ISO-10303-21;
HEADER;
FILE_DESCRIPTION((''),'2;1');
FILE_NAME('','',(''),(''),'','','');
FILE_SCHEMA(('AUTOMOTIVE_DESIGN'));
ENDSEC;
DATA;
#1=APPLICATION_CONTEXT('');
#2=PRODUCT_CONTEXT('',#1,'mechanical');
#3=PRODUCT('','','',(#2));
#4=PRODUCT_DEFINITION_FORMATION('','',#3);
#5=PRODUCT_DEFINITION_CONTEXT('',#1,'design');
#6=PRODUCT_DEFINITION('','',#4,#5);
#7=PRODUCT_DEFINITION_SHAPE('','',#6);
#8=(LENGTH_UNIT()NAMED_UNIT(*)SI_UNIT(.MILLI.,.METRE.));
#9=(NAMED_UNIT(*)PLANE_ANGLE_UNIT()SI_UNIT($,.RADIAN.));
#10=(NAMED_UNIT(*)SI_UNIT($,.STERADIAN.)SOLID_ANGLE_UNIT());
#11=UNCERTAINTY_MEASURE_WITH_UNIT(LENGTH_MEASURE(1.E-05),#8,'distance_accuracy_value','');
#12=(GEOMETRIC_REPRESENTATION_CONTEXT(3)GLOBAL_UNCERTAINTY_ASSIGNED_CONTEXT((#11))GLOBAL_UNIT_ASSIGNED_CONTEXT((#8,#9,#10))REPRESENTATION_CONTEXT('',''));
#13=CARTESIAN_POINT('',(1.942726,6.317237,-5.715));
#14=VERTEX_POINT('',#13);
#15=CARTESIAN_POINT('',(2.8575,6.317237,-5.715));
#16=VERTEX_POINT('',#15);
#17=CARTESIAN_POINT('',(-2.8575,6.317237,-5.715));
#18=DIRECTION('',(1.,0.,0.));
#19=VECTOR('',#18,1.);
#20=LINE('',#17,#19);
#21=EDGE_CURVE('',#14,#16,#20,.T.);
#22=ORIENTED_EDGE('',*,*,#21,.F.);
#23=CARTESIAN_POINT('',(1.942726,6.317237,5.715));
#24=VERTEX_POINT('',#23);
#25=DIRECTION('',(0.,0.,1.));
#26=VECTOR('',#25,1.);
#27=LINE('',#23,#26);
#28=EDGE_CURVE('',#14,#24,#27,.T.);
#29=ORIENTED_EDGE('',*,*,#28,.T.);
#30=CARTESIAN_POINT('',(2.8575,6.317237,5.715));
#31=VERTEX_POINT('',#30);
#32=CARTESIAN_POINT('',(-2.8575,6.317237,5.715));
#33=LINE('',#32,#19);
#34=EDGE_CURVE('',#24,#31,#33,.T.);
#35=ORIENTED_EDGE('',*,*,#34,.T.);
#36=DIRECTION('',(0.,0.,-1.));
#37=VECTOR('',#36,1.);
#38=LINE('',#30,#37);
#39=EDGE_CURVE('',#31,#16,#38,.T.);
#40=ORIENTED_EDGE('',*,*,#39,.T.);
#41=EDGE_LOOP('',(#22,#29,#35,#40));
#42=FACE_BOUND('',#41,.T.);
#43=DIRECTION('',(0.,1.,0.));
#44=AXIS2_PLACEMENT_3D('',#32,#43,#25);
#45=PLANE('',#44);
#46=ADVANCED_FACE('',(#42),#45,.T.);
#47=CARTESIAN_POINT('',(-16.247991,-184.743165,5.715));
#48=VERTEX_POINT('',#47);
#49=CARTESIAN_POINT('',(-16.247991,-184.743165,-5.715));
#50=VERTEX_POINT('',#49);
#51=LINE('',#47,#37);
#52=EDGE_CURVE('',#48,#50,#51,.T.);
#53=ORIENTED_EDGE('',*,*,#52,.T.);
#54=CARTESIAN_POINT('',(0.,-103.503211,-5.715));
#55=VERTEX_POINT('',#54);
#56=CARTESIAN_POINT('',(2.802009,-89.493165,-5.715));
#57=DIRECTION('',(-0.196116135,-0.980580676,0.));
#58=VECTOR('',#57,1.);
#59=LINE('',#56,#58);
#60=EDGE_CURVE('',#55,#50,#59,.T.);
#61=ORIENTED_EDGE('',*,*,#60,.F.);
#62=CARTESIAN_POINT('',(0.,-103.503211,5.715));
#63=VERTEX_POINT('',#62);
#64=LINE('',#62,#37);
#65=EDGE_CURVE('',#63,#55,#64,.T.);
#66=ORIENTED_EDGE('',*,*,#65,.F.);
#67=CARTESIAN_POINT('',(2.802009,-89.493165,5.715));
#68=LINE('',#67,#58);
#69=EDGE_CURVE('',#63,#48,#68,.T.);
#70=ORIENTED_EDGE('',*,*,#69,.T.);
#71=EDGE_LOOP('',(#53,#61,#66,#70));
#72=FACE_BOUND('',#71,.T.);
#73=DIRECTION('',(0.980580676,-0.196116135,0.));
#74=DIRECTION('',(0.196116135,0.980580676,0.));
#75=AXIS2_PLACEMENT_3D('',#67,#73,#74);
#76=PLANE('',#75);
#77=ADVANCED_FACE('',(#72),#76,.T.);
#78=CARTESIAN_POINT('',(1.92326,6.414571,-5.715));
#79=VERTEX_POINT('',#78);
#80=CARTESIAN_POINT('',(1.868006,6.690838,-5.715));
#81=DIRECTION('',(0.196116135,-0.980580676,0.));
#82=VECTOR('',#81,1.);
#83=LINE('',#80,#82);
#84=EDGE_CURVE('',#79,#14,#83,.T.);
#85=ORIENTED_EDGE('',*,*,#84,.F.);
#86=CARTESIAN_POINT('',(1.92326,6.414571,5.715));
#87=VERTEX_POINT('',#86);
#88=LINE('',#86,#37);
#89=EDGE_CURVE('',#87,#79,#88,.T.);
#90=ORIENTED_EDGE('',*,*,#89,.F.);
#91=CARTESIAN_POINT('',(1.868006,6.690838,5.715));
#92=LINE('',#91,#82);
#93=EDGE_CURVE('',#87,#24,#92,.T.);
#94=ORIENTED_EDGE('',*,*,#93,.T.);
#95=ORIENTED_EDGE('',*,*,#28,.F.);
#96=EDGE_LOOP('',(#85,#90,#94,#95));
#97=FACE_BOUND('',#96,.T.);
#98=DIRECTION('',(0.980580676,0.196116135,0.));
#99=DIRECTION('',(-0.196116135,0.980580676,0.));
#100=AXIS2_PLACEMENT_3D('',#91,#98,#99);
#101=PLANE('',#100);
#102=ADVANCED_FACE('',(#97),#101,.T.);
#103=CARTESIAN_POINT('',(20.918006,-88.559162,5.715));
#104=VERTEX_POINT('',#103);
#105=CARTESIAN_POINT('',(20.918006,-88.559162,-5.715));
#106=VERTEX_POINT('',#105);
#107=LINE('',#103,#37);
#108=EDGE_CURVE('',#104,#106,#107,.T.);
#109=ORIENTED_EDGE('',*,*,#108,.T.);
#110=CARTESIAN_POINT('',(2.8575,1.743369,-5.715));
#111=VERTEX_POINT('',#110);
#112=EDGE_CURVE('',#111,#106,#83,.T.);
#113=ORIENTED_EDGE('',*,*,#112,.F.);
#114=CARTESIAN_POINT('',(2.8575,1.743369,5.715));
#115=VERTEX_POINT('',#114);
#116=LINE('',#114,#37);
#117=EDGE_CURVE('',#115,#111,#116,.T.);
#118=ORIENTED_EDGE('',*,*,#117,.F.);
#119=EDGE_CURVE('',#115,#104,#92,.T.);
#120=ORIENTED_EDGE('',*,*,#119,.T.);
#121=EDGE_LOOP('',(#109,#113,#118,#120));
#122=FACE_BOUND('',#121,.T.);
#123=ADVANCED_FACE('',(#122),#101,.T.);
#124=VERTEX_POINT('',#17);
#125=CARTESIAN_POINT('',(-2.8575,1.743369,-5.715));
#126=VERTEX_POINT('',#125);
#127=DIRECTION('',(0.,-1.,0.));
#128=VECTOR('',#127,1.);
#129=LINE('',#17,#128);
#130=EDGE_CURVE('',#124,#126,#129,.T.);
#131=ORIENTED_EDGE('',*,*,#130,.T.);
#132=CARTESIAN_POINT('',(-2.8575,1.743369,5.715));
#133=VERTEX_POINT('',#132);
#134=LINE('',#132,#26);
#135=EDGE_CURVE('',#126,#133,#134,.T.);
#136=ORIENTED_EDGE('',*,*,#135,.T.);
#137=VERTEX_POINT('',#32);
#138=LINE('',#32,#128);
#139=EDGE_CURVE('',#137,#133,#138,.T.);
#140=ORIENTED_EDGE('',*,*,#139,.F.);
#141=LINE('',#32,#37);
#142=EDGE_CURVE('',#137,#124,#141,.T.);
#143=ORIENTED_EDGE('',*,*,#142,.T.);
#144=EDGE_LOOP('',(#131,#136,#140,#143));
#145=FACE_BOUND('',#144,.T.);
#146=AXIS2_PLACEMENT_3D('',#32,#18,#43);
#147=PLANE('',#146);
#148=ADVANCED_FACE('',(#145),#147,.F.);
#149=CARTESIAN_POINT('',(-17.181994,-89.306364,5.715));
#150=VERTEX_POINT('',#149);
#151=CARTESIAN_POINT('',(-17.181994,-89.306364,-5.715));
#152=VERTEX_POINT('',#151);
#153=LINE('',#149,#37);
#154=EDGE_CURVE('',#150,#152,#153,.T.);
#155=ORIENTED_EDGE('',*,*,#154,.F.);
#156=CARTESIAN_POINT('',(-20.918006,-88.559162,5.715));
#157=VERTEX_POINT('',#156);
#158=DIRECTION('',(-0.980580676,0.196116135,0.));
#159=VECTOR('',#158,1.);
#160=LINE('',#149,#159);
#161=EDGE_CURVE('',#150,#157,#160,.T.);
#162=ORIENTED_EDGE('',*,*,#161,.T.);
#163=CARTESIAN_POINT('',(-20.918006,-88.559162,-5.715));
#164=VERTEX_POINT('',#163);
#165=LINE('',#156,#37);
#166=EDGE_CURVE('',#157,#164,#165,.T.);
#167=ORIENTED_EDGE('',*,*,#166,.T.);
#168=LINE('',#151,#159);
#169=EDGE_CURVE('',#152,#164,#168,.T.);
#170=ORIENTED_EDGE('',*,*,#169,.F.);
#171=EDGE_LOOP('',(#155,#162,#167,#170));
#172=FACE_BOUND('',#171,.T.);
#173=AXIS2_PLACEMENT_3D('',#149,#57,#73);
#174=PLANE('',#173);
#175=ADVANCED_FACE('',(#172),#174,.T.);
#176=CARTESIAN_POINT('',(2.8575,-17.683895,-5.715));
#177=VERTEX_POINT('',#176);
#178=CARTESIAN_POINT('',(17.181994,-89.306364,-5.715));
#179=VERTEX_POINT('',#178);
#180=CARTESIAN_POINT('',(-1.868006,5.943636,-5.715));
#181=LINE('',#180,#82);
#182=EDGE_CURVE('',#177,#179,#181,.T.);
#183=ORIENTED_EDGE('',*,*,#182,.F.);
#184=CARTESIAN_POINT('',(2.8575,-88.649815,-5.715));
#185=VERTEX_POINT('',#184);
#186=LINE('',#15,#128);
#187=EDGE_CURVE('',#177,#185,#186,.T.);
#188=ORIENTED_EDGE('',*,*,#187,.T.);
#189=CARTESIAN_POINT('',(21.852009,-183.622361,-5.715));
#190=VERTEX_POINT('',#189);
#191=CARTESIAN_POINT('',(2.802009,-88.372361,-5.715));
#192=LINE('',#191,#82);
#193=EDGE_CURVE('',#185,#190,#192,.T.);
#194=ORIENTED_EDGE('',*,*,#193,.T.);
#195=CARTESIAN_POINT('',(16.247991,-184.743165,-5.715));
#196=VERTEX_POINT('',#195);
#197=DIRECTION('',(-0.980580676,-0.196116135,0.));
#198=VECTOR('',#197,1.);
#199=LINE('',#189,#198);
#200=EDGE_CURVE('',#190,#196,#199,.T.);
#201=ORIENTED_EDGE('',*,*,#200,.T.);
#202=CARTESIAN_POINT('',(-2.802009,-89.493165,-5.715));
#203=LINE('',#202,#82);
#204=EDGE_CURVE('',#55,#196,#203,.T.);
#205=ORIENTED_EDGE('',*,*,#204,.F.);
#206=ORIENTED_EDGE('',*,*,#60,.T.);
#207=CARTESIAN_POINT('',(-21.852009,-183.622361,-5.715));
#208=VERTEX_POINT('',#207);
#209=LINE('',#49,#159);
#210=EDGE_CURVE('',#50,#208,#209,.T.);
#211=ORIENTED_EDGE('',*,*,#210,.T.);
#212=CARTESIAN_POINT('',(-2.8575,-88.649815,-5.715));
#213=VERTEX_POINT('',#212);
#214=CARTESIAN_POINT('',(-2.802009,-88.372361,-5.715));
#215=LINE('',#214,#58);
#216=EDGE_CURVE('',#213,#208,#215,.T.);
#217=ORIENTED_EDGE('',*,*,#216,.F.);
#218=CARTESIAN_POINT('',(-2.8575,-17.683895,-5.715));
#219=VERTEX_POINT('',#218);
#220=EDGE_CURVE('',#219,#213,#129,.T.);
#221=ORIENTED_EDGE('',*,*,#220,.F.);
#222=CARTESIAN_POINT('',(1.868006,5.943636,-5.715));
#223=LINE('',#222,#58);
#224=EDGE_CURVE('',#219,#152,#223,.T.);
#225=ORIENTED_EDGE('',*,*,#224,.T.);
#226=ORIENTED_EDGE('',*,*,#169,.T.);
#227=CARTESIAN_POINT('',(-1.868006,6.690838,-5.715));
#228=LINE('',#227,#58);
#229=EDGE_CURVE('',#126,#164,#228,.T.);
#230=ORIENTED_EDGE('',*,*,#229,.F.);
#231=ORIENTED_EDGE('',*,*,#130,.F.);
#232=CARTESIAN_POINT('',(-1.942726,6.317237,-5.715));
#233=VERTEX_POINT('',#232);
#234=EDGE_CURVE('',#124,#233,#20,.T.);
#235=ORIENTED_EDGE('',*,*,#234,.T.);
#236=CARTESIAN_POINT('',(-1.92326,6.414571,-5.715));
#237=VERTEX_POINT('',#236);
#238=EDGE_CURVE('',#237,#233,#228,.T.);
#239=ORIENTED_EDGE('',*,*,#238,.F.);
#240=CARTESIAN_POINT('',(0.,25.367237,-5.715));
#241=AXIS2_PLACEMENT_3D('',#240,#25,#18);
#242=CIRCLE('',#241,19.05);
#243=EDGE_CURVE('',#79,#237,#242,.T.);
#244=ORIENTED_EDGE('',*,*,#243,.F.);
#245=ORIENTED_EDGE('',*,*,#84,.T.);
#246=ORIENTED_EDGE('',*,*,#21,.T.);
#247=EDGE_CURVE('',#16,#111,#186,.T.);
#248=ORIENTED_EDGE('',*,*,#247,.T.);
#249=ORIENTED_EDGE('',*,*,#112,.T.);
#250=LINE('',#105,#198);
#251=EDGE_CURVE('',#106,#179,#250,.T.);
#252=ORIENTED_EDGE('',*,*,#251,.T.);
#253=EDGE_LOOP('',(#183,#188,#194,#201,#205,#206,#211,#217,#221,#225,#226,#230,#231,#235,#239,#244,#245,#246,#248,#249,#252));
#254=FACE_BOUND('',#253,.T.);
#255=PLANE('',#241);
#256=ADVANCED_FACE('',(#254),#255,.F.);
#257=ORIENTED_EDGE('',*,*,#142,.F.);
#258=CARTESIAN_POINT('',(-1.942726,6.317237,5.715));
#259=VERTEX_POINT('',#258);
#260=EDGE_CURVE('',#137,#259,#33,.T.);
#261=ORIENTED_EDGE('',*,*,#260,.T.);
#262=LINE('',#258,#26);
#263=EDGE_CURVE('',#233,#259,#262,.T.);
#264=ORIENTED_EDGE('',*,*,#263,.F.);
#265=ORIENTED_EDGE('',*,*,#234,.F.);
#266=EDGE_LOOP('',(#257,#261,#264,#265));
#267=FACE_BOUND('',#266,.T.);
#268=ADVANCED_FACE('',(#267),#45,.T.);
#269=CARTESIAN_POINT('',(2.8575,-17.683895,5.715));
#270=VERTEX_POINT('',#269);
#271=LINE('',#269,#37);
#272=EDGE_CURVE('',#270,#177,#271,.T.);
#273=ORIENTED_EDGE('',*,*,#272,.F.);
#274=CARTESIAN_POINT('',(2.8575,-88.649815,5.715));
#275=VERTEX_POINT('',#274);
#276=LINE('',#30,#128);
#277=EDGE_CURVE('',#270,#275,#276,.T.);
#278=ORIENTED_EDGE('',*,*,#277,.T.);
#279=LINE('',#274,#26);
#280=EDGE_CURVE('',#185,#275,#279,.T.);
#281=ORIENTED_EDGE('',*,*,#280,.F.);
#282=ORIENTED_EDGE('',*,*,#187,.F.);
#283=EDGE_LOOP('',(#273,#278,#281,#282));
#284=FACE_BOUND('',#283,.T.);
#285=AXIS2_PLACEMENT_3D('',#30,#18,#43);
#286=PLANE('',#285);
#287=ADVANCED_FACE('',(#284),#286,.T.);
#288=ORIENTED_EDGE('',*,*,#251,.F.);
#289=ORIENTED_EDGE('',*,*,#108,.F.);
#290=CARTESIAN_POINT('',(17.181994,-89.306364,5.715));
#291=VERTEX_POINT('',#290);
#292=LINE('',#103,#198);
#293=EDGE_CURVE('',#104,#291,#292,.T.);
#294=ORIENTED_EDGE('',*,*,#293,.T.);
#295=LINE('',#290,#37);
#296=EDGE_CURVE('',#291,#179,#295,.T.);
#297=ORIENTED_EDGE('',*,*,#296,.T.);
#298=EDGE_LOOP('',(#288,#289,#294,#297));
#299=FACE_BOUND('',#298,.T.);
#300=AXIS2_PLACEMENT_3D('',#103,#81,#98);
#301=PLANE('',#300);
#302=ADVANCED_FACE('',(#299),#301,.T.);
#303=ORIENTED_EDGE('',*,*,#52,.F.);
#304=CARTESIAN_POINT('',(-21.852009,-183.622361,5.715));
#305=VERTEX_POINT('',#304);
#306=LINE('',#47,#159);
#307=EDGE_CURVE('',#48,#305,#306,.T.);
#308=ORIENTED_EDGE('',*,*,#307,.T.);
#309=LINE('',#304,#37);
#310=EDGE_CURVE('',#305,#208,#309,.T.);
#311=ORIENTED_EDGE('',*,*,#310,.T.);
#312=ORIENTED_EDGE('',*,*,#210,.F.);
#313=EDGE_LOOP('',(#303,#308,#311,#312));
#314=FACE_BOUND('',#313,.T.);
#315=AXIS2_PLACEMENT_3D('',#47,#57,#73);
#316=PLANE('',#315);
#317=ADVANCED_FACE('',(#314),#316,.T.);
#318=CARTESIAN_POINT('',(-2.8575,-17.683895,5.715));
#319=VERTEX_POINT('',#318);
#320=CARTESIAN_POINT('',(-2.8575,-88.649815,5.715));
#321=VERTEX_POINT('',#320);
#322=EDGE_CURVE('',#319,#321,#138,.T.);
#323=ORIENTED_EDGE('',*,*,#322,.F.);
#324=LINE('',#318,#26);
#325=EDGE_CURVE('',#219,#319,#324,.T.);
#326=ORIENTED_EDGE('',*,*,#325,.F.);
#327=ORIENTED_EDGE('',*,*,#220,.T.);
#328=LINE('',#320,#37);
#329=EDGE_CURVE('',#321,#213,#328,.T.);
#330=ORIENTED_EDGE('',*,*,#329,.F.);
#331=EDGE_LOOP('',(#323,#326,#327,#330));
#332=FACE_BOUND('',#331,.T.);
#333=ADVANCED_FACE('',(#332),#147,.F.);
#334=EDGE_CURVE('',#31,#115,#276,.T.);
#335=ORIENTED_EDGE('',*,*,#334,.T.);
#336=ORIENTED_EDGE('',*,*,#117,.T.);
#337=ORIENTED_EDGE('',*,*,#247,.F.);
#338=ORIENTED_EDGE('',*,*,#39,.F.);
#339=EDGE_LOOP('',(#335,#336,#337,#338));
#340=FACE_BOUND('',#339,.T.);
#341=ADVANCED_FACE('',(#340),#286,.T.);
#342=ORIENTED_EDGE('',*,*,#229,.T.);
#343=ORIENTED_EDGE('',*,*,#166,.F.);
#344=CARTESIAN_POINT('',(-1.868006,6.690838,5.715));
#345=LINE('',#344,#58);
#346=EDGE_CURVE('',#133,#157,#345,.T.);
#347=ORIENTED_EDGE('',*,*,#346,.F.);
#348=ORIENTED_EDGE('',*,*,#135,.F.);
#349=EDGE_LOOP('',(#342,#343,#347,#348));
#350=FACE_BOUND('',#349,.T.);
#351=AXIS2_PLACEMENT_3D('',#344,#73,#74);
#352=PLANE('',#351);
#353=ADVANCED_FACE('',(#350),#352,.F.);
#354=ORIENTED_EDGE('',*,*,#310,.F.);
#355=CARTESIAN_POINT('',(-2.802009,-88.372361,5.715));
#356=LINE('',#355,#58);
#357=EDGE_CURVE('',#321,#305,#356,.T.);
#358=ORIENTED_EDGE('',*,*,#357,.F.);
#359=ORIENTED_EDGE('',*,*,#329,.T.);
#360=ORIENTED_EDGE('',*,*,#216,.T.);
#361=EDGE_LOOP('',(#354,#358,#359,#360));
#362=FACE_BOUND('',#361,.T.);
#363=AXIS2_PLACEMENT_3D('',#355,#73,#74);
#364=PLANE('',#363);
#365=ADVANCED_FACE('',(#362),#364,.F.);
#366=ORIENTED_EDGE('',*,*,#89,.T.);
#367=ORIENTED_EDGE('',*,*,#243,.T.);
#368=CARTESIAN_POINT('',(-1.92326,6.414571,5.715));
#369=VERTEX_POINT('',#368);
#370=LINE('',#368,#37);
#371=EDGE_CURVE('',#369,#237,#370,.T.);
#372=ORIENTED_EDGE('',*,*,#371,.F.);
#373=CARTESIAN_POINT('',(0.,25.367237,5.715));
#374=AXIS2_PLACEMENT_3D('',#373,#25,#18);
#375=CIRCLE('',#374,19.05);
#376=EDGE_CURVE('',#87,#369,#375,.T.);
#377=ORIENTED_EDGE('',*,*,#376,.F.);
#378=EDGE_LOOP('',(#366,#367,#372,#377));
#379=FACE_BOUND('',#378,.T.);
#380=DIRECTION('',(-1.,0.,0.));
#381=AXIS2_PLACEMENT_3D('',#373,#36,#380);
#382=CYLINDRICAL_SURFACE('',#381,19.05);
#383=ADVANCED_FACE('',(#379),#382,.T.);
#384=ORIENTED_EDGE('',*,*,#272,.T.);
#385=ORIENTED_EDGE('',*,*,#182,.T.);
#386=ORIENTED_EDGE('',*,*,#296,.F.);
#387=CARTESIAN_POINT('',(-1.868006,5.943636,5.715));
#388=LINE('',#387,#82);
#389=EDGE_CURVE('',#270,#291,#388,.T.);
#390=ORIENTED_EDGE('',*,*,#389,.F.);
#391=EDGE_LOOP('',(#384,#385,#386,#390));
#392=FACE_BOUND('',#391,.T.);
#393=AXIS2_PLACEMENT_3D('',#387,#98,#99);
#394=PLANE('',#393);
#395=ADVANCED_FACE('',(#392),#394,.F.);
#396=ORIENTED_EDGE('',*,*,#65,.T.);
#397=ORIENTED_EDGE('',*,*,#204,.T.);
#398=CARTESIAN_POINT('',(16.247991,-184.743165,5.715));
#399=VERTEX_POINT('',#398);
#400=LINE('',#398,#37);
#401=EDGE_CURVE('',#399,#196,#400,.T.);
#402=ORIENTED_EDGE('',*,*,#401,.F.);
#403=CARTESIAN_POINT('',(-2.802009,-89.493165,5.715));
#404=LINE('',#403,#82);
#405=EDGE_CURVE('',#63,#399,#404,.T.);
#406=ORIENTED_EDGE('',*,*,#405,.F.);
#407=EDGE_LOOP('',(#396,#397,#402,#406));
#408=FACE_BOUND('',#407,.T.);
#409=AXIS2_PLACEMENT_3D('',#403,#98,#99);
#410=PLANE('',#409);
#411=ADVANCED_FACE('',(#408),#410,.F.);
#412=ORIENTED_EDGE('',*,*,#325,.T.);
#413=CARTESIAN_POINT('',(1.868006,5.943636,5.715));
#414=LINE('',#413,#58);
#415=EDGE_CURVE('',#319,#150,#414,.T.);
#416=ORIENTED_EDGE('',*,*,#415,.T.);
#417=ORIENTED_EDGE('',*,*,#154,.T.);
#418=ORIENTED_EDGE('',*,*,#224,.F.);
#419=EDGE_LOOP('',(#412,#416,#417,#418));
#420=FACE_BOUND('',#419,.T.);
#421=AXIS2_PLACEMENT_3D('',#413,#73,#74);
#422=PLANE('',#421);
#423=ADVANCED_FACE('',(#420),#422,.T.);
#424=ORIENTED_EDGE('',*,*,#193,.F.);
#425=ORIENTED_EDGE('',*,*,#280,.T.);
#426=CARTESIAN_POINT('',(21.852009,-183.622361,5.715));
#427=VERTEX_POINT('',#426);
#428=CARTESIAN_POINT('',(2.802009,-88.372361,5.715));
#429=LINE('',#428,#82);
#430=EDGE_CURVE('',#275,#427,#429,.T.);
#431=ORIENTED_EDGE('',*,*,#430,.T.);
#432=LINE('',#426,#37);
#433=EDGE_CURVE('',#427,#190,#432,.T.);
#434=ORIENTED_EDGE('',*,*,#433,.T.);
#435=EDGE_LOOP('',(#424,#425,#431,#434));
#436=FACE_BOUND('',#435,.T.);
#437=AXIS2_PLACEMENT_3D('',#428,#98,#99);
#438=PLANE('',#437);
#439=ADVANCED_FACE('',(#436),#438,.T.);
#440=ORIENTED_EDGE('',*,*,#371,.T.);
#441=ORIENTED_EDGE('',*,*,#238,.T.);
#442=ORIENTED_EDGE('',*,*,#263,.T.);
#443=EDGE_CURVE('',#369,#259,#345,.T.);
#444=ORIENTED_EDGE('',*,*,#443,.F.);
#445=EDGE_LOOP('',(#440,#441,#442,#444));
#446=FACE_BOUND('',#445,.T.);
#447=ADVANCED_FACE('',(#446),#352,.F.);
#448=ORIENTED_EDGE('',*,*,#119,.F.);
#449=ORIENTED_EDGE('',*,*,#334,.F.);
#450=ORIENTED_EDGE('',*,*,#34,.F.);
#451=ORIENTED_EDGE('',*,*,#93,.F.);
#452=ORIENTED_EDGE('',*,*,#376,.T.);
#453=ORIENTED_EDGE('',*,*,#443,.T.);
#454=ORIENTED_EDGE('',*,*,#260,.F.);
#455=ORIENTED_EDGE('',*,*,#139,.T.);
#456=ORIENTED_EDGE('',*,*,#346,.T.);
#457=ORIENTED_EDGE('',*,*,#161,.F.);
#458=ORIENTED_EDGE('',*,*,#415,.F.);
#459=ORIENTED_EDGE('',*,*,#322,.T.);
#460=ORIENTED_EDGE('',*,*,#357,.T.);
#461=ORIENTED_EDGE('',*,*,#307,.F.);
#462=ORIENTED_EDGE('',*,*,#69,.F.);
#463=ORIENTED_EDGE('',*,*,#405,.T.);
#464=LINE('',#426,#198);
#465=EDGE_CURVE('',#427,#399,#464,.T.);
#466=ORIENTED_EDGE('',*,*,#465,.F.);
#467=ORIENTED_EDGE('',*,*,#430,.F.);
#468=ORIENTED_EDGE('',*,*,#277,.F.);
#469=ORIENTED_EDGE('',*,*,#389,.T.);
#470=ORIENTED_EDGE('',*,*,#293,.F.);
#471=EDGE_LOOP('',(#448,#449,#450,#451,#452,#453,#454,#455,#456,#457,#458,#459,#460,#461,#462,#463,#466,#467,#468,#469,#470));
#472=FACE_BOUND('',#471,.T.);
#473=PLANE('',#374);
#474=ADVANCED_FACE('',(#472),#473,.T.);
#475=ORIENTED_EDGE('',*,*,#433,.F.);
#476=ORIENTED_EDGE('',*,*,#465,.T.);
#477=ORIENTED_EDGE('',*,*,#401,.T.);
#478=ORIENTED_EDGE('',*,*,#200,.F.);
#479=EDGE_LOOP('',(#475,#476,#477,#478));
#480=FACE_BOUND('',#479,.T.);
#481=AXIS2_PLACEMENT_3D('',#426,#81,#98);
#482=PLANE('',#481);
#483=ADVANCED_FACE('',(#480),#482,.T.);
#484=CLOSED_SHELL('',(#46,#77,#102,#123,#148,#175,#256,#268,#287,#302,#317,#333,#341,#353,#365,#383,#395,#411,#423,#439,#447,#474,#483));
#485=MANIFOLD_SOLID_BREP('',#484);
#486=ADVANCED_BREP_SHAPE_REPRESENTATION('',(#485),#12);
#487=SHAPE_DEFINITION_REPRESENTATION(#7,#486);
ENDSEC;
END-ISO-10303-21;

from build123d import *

# Parameters (mm, degrees)
SKETCH1_R           = 12.7
BOSS_EXTRUDE1_DEPTH = 3.81
EXTRUDE_THIN1_START = -3.81
EXTRUDE_THIN1_DEPTH = 7.62
EXTRUDE_THIN4_DEPTH = 3.81
SCALE1_SCALE        = 1.5


# Read off the part's stored shape, not the designer's step: Extrude-Thin1
with BuildPart() as part:
    # Sketch1 → Boss-Extrude1 (new, symmetric)
    with BuildSketch(Plane.XY):
        with Locations(Location((0, 0, 0), (0, 0, 180))):
            Circle(SKETCH1_R)
    extrude(amount=BOSS_EXTRUDE1_DEPTH, both=True)



with BuildPart() as body_2:
    # Extrude-Thin1 outline → Extrude-Thin1 (new body)
    with BuildSketch(Plane.XY.offset(EXTRUDE_THIN1_START)):
        Polygon((14.568006187, -139.326398763), (1.905, -76.011367827), (1.905, -12.7), (-1.905, -12.7), (-1.905, -76.011367827), (-14.568006187, -139.326398763), (-10.831993813, -140.073601237), (0, -85.913632173), (10.831993813, -140.073601237), align=None)
    extrude(amount=EXTRUDE_THIN1_DEPTH)


with BuildPart() as part_1:
    add(part.part)

    add(body_2.part)  # Extrude-Thin4 merges body 2
    # Sketch1<4> → Extrude-Thin4 (add, symmetric)
    with BuildSketch(Plane.XY):
        Polygon((13.945337458, -75.950932508), (0, -6.224245218), (-13.945337458, -75.950932508), (-11.454662542, -76.449067492), (0, -19.175754782), (11.454662542, -76.449067492), align=None)
    extrude(amount=EXTRUDE_THIN4_DEPTH, both=True)


with BuildPart() as part_2:
    # Scale1: scaled about (0, -50.73447441, 0)
    add(part_1.part.scale(SCALE1_SCALE).moved(Location((0, 25.367237205, 0))))


solid = part_2.part
